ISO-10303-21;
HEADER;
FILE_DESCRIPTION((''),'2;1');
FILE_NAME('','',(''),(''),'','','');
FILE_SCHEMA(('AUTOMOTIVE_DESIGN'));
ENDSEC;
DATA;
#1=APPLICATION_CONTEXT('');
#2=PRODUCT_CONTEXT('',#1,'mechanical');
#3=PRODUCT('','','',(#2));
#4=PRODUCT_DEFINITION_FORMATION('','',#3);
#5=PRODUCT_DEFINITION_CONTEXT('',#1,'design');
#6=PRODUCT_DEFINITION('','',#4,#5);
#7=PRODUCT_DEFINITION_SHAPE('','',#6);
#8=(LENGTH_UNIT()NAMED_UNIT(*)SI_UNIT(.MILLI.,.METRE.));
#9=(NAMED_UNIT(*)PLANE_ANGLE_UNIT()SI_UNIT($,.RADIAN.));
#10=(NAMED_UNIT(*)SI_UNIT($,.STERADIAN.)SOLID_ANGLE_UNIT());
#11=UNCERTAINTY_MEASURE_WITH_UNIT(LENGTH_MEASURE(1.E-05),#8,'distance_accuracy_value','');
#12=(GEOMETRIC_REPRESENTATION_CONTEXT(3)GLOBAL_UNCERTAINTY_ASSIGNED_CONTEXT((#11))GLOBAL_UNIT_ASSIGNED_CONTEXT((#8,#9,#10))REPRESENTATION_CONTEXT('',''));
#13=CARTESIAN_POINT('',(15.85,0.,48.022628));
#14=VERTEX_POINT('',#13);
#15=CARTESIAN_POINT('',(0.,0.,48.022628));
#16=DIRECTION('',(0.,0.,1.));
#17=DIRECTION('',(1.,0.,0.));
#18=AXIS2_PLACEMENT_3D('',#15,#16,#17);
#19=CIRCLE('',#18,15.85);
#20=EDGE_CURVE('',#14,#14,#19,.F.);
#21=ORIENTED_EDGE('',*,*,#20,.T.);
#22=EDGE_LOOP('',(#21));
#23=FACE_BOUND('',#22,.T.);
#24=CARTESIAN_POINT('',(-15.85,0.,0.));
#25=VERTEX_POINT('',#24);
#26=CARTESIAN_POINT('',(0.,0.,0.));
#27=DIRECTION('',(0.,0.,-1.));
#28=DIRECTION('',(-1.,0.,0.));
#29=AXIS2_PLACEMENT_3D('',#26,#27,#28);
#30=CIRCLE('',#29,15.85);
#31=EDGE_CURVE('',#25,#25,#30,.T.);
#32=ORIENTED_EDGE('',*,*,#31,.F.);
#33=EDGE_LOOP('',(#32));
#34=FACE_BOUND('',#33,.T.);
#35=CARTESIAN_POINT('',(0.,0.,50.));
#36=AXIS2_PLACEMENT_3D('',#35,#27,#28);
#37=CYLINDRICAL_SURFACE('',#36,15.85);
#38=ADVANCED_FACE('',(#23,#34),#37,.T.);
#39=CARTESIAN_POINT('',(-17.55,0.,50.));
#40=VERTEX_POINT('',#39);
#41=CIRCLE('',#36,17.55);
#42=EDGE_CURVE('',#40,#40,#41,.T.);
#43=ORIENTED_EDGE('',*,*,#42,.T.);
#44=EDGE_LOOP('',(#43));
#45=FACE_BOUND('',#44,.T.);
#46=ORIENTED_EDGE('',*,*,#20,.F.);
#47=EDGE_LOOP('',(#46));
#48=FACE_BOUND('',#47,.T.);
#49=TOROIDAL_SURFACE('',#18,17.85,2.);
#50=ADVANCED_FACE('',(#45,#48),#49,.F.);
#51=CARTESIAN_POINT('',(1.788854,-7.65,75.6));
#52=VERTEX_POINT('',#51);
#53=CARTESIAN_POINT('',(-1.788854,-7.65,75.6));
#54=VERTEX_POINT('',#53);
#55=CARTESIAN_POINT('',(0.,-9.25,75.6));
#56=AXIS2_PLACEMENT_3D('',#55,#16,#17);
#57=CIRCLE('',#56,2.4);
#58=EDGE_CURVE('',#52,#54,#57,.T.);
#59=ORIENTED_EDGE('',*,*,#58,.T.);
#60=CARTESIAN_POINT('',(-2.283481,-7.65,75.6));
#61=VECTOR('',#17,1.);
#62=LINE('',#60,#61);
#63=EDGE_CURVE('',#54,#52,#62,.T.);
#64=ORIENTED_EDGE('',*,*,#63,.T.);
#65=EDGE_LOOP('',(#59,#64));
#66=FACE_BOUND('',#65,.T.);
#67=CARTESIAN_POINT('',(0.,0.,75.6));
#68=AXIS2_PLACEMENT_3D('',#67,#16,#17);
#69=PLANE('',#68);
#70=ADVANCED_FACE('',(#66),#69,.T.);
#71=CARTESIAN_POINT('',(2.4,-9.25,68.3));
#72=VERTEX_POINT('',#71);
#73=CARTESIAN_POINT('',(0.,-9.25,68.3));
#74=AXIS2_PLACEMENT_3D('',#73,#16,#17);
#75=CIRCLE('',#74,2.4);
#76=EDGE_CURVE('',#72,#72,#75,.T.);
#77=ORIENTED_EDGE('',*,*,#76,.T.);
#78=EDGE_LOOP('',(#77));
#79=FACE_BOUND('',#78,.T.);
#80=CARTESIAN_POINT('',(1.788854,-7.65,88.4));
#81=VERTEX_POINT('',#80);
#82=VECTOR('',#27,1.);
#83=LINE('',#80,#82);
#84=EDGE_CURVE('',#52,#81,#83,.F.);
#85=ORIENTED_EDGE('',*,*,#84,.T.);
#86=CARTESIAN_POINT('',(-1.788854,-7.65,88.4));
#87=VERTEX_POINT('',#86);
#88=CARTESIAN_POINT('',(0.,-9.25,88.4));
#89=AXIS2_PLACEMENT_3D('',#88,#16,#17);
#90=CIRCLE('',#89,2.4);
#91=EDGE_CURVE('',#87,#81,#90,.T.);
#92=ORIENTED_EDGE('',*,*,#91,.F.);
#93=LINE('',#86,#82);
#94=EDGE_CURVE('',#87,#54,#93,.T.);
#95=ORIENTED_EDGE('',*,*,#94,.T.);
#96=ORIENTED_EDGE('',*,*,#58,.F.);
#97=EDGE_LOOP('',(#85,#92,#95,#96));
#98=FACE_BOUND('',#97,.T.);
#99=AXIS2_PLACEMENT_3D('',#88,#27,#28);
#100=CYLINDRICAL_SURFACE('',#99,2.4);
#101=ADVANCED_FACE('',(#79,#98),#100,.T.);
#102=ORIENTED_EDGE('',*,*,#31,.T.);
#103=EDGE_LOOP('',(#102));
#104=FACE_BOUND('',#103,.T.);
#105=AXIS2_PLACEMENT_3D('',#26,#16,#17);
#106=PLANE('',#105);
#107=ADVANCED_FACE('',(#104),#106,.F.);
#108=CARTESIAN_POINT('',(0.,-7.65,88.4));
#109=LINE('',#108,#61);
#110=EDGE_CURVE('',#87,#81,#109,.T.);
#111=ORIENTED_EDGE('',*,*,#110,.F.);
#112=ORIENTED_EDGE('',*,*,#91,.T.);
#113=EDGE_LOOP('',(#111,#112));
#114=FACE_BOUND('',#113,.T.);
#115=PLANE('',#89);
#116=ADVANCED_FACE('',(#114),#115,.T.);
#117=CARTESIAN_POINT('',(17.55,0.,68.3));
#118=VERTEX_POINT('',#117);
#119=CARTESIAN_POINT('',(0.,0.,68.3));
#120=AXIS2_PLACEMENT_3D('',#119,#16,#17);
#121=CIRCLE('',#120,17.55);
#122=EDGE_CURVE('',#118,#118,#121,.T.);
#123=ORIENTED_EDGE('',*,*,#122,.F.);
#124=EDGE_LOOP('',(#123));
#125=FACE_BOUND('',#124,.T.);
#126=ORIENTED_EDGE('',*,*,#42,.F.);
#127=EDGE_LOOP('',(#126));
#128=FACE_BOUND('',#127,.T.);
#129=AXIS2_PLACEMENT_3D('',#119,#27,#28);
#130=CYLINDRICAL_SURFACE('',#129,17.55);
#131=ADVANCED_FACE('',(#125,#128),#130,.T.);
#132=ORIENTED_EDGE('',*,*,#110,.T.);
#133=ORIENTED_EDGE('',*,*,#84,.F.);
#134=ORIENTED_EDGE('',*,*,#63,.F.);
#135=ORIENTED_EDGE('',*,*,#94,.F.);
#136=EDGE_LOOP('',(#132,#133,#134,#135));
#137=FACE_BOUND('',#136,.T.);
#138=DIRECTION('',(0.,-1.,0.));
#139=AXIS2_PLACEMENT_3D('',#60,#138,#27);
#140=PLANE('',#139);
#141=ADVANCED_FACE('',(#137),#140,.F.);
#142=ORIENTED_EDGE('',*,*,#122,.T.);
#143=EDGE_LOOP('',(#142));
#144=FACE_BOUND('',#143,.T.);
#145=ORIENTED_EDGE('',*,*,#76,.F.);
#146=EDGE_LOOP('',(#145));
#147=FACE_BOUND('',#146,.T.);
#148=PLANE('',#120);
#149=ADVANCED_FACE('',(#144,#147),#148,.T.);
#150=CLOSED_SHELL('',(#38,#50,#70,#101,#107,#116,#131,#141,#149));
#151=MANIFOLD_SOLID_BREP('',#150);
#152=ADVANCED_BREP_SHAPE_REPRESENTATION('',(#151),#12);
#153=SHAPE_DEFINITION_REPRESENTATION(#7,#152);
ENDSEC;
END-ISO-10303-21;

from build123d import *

# Parameters (mm, degrees)
SKETCH2_R           = 17.55
BOSS_EXTRUDE1_DEPTH = 68.3
SKETCH4_R           = 17.55
SKETCH4_R_2         = 15.85
CUT_EXTRUDE1_DEPTH  = 50
SKETCH5_R           = 2.4
BOSS_EXTRUDE3_DEPTH = 20.1
SKETCH6_W           = 4.602135996
SKETCH6_H           = 1.29181111
CUT_EXTRUDE2_DEPTH  = 12.8
FILLET1_R           = 2


with BuildPart() as part:
    # Sketch2 → Boss-Extrude1 (new body)
    with BuildSketch(Plane.XY):
        Circle(SKETCH2_R)
    extrude(amount=BOSS_EXTRUDE1_DEPTH)

    # Sketch4 → Cut-Extrude1 (cut)
    with BuildSketch(Plane(origin=(0, 0, 0), x_dir=(-1, 0, 0), z_dir=(0, 0, -1))):
        Circle(SKETCH4_R)
        Circle(SKETCH4_R_2, mode=Mode.SUBTRACT)
    extrude(amount=-CUT_EXTRUDE1_DEPTH, mode=Mode.SUBTRACT)

    # Sketch5 → Boss-Extrude3 (add)
    with BuildSketch(Plane.XY.offset(68.3)):
        with Locations((0, -9.25)):
            Circle(SKETCH5_R)
    extrude(amount=BOSS_EXTRUDE3_DEPTH)

    # Sketch6 → Cut-Extrude2 (cut)
    with BuildSketch(Plane.XY.offset(88.4)):
        with Locations((0.017586897, -7.004094445)):
            Rectangle(SKETCH6_W, SKETCH6_H)
    extrude(amount=-CUT_EXTRUDE2_DEPTH, mode=Mode.SUBTRACT)

    # Fillet1
    # the kernel refuses this fillet: 2 mm, written as the material it adds along each edge
    with BuildSketch(Plane(origin=(0, 0, 50), x_dir=(-1, 0, 0), z_dir=(0, -1, 0))) as fillet1_piece_1:
        with BuildLine():
            CenterArc((17.85, 1.977371993), FILLET1_R, 180, 81.373073441)
            Line((15.85, 1.977371993), (15.81, 1.977371993))
            Line((15.81, 1.977371993), (15.81, 0))
            Line((15.81, 0), (15.85, -0.04))
            ThreePointArc((15.85, -0.04), (16.7, -0.04), (17.544, -0.03954744))
            Line((17.544, -0.03954744), (17.55, 0))
        make_face()
    revolve(axis=Axis((0, 0, 50), (0, 0, -1)))


solid = part.part
